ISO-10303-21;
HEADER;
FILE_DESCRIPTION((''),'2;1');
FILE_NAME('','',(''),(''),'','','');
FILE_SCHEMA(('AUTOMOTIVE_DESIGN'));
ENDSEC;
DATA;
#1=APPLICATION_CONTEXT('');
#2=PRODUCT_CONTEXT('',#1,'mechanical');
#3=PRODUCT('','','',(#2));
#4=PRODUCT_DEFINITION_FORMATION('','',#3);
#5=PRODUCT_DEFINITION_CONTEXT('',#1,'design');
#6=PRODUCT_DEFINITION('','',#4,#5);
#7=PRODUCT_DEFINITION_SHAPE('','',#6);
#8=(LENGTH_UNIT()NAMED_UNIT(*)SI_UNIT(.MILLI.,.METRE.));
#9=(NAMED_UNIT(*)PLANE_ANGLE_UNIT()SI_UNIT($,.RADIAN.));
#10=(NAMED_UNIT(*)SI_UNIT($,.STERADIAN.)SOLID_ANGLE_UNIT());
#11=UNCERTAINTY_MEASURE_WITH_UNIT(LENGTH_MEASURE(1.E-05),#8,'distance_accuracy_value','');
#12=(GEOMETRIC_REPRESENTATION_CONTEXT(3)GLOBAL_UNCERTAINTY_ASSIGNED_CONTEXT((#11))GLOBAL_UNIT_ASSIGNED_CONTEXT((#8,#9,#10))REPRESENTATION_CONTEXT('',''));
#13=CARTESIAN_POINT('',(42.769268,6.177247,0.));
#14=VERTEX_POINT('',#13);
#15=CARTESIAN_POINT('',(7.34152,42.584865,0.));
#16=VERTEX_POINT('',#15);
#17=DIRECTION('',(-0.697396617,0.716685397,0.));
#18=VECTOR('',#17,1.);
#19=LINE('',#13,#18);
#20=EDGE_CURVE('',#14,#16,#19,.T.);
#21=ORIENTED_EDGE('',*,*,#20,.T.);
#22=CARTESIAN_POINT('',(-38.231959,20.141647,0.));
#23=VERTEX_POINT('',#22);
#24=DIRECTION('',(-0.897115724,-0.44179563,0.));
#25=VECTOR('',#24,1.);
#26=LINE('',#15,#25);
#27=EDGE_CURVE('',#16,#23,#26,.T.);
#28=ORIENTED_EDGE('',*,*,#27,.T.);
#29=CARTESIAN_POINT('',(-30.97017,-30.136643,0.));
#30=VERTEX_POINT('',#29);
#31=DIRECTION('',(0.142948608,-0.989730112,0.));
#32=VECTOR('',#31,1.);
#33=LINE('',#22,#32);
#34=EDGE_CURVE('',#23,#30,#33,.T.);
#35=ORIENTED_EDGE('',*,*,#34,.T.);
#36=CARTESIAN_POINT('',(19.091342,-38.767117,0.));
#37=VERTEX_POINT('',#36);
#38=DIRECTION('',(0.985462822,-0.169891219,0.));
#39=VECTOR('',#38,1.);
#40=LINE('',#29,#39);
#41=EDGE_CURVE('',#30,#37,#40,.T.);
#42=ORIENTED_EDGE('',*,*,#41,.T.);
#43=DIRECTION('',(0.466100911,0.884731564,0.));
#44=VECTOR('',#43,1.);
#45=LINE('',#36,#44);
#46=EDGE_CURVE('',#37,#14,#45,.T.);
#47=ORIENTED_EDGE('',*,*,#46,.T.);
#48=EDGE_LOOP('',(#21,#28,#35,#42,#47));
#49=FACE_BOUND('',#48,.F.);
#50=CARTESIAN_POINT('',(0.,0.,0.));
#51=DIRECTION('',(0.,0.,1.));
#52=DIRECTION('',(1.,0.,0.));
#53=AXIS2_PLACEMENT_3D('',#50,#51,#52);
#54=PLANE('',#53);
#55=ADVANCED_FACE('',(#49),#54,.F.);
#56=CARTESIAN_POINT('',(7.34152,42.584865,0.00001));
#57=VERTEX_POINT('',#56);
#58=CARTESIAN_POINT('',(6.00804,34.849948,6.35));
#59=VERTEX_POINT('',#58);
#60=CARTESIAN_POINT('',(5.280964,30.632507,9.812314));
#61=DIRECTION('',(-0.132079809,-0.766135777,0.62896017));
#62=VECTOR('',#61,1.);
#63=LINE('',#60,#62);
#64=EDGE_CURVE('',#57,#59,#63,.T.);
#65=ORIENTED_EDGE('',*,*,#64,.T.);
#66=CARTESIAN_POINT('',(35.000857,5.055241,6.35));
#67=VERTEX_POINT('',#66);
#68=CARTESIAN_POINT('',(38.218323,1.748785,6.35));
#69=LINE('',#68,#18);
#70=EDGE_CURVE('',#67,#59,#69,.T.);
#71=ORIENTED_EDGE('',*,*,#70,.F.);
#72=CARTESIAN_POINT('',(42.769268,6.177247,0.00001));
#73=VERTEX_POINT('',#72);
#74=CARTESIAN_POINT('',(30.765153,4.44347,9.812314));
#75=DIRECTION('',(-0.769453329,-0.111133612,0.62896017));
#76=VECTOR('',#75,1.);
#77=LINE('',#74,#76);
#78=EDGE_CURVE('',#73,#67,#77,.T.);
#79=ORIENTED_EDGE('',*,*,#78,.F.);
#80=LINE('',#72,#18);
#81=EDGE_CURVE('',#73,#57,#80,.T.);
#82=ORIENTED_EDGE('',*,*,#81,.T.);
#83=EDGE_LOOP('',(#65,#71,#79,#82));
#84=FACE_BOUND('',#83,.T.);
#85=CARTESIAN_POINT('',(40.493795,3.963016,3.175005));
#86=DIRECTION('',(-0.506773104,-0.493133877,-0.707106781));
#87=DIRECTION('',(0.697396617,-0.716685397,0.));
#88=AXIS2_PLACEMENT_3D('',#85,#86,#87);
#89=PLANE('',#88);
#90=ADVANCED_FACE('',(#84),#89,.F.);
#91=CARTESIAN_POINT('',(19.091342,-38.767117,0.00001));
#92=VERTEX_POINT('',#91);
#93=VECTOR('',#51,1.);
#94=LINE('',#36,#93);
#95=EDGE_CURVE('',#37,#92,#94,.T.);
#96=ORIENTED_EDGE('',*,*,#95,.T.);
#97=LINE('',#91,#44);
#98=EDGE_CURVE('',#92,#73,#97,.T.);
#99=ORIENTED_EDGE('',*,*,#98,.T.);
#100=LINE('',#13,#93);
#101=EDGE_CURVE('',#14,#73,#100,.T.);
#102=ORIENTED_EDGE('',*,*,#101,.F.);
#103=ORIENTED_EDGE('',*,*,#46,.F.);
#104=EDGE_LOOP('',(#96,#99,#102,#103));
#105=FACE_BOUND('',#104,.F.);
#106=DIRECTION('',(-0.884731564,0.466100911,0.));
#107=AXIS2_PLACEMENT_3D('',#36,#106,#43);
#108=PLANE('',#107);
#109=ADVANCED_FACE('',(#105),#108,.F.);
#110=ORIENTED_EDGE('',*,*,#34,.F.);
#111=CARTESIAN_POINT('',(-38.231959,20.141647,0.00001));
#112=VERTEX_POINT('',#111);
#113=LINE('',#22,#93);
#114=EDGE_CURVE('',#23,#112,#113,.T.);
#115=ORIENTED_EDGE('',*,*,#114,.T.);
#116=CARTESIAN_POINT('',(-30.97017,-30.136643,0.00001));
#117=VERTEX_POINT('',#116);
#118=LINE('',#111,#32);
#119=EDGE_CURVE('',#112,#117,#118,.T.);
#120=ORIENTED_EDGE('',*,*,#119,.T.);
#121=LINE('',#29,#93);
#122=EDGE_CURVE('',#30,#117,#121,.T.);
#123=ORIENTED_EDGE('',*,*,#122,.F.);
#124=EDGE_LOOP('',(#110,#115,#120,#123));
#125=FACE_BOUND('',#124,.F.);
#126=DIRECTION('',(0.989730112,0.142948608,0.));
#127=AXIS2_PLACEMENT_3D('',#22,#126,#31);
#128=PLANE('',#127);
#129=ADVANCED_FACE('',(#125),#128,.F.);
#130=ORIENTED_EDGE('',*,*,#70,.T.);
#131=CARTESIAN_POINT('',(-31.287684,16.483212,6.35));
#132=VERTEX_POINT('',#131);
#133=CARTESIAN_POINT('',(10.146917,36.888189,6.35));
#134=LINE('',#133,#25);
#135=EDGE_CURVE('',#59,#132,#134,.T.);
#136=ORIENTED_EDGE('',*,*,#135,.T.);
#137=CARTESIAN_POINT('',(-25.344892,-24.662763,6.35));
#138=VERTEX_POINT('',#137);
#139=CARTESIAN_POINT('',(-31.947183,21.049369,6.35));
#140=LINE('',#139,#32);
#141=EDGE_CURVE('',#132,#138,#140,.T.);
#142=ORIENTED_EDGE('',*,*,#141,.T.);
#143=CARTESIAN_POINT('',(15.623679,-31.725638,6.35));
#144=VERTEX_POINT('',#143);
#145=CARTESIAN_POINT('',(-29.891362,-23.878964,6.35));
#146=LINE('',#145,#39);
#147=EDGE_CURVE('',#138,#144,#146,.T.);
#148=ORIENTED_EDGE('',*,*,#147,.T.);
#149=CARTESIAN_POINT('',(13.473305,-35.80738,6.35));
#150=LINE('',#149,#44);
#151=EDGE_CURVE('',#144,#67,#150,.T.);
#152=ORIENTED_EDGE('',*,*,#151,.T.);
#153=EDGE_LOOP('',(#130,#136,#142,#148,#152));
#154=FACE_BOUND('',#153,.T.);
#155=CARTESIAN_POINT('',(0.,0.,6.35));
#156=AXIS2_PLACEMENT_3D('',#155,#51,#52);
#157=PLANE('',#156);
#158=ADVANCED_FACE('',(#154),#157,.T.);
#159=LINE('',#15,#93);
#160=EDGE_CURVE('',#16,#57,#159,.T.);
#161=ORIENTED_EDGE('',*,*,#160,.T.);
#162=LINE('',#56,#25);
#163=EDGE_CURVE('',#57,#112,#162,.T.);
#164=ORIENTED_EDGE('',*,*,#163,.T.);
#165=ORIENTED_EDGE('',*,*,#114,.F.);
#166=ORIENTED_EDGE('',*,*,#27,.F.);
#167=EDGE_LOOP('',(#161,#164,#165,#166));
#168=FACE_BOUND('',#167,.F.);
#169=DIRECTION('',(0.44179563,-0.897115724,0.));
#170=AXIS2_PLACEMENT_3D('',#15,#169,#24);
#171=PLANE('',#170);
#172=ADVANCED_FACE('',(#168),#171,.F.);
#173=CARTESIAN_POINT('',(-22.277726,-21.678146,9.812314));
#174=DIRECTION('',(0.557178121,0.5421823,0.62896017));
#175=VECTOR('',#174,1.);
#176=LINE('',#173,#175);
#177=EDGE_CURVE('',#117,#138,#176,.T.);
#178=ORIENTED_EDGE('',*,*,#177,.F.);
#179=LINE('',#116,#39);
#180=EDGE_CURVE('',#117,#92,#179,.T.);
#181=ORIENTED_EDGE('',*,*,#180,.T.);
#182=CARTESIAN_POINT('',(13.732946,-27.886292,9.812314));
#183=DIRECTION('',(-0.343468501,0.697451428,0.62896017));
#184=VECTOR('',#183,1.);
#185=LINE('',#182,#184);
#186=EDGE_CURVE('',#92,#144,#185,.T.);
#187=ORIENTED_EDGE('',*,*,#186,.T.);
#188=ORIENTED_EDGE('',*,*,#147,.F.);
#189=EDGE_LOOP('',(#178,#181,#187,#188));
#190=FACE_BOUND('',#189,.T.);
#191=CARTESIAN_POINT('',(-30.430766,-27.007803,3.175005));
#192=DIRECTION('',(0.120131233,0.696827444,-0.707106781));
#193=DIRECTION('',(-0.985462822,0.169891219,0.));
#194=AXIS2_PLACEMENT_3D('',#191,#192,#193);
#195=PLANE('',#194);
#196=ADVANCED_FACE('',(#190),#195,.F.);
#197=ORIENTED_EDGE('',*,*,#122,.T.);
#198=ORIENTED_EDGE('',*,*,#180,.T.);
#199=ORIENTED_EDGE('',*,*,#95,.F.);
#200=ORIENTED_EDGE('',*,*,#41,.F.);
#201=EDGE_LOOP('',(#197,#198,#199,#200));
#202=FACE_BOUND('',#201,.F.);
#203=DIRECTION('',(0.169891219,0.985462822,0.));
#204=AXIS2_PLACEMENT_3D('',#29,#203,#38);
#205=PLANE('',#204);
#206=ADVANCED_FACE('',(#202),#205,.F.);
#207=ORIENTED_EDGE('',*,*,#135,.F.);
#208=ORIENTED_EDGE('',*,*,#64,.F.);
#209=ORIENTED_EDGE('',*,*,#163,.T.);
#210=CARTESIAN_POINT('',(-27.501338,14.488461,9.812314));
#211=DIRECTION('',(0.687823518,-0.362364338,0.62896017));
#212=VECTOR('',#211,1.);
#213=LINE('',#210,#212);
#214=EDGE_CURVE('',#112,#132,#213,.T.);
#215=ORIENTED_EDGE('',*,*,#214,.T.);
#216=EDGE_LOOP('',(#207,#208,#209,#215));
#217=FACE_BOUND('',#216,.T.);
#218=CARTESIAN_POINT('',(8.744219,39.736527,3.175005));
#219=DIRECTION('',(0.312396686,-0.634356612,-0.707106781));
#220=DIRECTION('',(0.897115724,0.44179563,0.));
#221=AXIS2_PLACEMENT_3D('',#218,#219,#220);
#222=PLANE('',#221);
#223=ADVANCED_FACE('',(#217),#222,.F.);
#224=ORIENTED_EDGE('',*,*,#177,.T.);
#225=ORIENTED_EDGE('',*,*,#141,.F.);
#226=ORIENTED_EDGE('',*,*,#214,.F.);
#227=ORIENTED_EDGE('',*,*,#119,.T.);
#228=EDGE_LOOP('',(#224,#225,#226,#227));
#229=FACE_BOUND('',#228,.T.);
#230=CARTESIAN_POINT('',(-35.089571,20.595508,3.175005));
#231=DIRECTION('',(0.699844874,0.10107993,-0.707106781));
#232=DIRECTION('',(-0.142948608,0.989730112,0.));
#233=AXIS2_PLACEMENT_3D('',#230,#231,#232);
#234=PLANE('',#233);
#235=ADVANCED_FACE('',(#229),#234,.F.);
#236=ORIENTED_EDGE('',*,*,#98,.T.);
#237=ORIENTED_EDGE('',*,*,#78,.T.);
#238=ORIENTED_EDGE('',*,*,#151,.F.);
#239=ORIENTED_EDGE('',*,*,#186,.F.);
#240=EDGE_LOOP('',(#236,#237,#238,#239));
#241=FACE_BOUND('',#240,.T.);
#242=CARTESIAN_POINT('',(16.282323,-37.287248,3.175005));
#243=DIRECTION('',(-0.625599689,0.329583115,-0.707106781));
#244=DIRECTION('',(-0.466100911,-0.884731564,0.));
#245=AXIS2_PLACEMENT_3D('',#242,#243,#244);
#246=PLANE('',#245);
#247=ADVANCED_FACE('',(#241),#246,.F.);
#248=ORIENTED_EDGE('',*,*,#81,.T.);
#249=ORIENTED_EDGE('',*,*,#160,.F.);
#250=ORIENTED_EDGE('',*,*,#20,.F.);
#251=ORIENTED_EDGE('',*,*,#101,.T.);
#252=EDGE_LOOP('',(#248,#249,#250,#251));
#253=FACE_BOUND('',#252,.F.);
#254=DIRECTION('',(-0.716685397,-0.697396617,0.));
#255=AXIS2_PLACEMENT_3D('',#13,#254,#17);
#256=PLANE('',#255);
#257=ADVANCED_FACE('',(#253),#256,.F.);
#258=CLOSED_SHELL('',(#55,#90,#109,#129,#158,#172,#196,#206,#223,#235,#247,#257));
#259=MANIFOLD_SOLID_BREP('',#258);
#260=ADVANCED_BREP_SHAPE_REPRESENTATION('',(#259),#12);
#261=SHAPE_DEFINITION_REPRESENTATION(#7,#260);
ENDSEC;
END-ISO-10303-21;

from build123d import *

# Parameters (mm, degrees)
F1_DEPTH = 6.35
F2_SIZE  = 6.34999


# Not quite as in the source:
# - a fillet or chamfer is up to 0.001 mm smaller than in the source, because OpenCascade refuses the exact size


with BuildPart() as f1:
    # F0 (on Top) → F1 (new body)
    with BuildSketch(Plane.XY):
        Polygon((7.3415196396, 42.584865104), (-38.2319591196, 20.141647113), (-30.9701698319, -30.1366425988), (19.0913415261, -38.7671165459), (42.7692677859, 6.1772469276), align=None)
    extrude(amount=F1_DEPTH)

    # F2 (size 6.35 in the source; OpenCascade refuses exactly that, so slightly less here)
    f2_edges = [f1.edges().sort_by_distance(p)[0] for p in [
        (30.930305, -16.294935, 6.35),
        (25.055394, 24.381056, 6.35),
        (-15.44522, 31.363256, 6.35),
        (-5.939414, -34.45188, 6.35),
        (-34.601064, -4.997498, 6.35),
    ]]
    chamfer(f2_edges, length=F2_SIZE)


solid = f1.part
